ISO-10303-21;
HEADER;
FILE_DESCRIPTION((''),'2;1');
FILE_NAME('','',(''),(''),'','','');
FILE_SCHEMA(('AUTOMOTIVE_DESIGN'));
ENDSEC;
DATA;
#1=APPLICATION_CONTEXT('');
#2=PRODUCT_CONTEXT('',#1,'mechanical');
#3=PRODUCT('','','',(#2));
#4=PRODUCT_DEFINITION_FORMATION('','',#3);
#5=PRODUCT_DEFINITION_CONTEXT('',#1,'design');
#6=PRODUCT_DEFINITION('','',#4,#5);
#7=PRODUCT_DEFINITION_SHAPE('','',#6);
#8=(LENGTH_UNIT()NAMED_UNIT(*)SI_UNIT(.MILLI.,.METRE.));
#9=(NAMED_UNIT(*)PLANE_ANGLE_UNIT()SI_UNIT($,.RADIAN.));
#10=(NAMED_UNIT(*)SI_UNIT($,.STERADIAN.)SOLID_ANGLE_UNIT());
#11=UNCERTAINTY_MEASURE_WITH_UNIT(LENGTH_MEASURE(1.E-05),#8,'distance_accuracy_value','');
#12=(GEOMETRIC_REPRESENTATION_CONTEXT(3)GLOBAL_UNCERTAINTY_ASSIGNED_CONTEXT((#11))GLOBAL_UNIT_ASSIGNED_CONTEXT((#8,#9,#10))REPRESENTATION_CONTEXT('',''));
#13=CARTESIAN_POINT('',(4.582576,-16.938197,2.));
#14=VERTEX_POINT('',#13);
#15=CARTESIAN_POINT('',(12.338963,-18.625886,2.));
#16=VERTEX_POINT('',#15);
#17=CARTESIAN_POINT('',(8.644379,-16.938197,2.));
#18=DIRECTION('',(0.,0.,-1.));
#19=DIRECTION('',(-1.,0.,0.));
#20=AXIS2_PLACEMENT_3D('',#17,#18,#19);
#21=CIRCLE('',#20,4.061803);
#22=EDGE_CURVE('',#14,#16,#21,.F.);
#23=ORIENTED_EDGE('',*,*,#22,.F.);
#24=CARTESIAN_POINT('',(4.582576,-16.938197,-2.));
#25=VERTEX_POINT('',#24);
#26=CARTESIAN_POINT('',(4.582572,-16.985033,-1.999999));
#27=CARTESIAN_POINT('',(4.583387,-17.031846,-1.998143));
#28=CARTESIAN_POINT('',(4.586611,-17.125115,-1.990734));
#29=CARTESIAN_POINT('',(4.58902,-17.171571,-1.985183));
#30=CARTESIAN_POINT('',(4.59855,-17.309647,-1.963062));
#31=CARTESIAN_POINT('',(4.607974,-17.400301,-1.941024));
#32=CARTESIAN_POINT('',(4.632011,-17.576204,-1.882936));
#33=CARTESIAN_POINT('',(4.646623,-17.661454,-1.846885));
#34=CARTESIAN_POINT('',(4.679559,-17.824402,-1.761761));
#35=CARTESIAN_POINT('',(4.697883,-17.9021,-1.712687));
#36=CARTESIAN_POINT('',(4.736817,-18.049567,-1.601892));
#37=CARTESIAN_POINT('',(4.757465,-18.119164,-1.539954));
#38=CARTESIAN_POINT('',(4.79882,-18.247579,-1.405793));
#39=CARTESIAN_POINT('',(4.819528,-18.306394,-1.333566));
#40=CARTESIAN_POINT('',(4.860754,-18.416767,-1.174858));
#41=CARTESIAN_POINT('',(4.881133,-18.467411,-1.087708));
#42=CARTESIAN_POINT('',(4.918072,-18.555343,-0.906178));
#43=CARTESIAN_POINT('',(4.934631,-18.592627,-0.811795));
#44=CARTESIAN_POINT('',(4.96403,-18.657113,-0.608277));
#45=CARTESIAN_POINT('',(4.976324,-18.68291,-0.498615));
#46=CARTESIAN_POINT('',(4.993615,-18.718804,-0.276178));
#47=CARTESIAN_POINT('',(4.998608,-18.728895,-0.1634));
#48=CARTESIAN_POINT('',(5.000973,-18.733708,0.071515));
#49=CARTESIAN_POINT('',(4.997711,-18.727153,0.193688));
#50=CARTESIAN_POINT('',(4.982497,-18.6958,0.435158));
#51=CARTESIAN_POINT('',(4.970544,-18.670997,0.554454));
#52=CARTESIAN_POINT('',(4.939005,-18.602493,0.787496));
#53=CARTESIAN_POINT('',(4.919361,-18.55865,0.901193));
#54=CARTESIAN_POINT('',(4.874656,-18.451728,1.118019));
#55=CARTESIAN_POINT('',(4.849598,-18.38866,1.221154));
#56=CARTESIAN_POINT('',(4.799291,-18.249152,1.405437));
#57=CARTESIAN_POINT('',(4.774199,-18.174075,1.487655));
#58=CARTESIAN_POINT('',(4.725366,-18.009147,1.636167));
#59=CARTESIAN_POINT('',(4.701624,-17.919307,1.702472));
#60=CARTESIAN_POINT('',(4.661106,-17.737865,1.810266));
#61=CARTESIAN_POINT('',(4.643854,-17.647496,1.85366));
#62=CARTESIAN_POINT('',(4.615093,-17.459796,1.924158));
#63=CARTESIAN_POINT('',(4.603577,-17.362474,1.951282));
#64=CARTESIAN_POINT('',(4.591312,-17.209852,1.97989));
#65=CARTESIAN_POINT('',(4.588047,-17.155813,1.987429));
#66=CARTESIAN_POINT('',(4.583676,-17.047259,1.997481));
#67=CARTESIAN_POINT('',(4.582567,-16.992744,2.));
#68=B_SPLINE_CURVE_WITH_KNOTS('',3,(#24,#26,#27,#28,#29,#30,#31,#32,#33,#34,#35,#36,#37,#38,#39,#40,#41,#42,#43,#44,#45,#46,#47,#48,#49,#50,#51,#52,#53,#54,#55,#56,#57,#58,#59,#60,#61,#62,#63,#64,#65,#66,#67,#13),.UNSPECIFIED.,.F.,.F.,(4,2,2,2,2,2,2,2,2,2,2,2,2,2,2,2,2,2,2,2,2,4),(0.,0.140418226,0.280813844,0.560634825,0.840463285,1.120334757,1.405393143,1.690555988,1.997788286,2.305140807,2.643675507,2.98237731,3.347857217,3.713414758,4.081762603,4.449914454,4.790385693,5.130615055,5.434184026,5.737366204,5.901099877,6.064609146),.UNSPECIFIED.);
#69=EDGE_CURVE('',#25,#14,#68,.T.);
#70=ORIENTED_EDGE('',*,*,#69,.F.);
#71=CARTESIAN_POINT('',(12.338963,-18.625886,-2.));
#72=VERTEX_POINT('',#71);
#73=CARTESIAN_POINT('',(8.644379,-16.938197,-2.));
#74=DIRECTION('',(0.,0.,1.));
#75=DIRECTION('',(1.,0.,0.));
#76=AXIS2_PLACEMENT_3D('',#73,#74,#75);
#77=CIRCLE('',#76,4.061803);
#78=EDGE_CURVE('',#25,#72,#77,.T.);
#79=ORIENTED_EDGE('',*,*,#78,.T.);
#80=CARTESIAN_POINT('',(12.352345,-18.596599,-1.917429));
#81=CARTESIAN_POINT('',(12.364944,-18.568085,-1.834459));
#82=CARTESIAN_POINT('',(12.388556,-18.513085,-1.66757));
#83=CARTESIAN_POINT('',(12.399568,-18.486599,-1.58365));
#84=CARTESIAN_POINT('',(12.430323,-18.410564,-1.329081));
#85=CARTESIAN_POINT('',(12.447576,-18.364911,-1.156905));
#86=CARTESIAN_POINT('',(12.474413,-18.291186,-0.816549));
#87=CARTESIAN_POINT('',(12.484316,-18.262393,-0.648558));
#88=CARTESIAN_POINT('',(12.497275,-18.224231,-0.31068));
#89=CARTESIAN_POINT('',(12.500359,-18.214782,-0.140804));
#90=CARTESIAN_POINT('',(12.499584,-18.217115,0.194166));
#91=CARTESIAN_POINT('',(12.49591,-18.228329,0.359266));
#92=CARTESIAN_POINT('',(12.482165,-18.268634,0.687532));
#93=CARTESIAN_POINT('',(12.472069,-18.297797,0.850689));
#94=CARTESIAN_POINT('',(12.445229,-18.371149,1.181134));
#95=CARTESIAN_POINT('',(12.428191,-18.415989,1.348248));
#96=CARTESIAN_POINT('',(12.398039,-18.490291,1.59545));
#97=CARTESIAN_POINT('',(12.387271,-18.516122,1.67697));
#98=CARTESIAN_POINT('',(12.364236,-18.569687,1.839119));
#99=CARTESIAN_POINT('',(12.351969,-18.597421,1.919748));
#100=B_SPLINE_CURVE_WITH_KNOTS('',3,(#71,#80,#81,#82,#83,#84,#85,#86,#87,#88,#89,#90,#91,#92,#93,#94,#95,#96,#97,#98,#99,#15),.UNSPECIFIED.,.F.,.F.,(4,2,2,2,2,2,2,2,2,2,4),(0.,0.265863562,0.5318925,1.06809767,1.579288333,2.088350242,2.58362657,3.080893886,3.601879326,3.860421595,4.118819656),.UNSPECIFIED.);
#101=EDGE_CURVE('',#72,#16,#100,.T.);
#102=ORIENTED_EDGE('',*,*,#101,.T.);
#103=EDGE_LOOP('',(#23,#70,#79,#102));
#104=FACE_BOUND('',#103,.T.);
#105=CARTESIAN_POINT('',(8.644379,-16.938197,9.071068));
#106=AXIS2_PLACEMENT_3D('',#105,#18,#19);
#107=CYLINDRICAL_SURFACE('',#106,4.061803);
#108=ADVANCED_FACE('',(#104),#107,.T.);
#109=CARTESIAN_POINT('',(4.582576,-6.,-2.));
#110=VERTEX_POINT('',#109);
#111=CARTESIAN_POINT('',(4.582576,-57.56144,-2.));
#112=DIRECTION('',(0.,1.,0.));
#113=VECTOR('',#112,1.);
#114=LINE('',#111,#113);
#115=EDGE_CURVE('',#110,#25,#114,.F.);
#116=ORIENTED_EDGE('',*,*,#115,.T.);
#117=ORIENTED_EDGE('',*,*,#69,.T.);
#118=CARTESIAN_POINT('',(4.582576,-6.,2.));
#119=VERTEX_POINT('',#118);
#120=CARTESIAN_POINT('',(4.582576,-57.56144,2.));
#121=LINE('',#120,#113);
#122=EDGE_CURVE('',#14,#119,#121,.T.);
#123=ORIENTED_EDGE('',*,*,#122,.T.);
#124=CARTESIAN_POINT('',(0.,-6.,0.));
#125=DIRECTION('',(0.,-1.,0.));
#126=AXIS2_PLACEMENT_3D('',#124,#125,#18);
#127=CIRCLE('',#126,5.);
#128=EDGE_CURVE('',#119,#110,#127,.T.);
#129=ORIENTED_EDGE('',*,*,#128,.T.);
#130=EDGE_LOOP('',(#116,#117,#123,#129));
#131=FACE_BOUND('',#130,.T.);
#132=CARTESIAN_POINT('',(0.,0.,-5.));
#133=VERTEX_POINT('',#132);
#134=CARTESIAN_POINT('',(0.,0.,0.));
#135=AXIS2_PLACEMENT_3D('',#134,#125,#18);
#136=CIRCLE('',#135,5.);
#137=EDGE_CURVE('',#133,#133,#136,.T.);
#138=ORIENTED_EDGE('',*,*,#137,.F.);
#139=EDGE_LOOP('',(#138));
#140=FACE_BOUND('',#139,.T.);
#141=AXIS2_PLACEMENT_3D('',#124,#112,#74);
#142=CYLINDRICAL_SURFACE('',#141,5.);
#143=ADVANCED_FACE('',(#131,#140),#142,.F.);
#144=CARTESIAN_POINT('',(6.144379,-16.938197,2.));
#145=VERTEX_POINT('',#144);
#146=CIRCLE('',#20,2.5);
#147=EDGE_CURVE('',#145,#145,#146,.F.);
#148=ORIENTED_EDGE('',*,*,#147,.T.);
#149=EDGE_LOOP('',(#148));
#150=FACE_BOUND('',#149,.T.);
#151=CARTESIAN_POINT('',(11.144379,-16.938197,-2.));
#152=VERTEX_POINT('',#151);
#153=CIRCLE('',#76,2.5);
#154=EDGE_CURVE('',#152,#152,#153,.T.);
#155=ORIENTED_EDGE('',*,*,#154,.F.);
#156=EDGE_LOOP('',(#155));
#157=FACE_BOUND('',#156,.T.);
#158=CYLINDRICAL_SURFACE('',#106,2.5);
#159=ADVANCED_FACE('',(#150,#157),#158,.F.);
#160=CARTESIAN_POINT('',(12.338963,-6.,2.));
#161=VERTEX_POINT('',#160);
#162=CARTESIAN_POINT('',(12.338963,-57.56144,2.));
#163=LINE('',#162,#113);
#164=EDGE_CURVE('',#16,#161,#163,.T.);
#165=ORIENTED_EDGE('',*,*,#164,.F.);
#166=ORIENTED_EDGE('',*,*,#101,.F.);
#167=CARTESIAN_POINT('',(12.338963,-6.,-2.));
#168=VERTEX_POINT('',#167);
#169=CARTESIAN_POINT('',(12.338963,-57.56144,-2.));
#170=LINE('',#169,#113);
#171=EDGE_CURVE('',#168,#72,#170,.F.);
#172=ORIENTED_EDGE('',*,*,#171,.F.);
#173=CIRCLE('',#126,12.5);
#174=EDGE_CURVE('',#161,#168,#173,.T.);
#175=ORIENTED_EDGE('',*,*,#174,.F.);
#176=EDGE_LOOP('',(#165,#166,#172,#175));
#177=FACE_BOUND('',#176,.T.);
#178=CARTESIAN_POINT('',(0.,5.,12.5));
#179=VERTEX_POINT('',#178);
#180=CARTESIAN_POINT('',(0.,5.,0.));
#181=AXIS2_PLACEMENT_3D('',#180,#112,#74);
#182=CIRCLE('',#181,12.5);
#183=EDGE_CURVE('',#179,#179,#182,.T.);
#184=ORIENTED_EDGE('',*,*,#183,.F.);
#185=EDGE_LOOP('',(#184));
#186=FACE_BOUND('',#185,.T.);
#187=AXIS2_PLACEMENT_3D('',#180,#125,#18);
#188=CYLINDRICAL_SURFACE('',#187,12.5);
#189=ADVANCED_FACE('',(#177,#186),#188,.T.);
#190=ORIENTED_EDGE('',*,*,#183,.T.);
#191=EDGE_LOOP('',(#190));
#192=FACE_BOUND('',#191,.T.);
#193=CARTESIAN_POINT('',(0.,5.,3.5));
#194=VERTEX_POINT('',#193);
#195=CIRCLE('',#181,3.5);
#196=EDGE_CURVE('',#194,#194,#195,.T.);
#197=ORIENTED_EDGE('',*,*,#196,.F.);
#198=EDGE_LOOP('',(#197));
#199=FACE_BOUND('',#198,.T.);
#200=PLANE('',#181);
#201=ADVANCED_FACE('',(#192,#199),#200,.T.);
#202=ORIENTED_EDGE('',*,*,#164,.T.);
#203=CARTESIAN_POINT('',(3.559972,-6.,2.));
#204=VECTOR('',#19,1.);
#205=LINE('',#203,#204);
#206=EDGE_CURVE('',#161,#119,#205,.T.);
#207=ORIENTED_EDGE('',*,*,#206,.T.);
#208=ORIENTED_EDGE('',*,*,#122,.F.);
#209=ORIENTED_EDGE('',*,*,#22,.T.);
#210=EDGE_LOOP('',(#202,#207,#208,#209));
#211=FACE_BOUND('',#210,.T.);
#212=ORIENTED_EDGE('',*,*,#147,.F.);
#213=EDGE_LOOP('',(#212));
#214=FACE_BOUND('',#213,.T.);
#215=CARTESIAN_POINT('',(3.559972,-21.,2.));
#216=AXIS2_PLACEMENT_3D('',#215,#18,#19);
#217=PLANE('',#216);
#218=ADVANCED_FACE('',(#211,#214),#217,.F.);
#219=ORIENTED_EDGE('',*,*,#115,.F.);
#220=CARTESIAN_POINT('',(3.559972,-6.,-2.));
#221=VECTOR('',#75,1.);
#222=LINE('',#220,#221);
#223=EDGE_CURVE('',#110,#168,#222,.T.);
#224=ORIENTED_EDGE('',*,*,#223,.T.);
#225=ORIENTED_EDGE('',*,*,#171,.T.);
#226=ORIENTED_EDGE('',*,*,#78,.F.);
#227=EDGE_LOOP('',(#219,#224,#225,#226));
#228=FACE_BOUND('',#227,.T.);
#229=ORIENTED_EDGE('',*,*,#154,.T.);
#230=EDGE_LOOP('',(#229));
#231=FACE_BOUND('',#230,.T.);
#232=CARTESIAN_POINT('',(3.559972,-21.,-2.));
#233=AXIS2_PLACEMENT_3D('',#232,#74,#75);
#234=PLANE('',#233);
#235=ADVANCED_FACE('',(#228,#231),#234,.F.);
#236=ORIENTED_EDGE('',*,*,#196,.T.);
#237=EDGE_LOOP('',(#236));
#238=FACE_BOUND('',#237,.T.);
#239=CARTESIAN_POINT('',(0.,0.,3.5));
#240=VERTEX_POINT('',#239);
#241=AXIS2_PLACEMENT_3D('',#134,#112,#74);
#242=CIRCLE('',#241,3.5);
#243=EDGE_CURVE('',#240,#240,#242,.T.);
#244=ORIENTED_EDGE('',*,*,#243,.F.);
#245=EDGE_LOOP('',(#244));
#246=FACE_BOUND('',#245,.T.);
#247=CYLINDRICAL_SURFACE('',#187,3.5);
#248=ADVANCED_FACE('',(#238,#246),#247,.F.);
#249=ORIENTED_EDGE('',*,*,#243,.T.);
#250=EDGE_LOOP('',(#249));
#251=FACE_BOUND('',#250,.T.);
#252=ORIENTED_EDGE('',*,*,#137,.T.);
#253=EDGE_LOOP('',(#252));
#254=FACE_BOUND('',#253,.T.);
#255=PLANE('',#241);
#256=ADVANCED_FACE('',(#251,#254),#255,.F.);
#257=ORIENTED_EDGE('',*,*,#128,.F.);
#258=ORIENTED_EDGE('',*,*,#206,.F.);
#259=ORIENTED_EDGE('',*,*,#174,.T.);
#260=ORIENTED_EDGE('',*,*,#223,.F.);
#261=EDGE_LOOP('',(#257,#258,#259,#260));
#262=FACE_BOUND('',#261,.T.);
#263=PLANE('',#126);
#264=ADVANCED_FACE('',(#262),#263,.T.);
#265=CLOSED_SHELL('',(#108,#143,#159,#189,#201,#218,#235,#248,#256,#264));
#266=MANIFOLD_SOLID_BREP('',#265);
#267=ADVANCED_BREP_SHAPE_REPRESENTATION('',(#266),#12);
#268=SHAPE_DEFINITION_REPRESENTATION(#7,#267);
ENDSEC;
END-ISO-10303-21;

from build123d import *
from build123d.topology import SkipClean

# Parameters (mm, degrees)
SKETCH1_R                      = 12.5
SKETCH1_R_2                    = 3.5
BOSS_EXTRUDE1_DEPTH            = 5
BOSS_EXTRUDE2_START            = 6
SKETCH2_R                      = 12.5
SKETCH2_R_2                    = 5
BOSS_EXTRUDE2_DEPTH            = 6
SKETCH3_W                      = 10.120170627
SKETCH3_H                      = 4
BOSS_EXTRUDE3_DEPTH            = 15
SKETCH2_2_OUTSIDE_W            = 37.094
SKETCH2_2_OUTSIDE_H            = 35.914
SKETCH2_2_OUTSIDE_R            = 12.5
SKETCH2_2_OUTSIDE_R_2          = 5
CUT_EXTRUDE1_DEPTH             = 21
CUT_EXTRUDE2_REACH             = 29.45
SKETCH4_R                      = 2.5
CUT_EXTRUDE2_DIRECTION_2_REACH = 29.45


with BuildPart() as part:
    # Sketch1 → Boss-Extrude1 (new body)
    with BuildSketch(Plane(origin=(0, 0, 0), x_dir=(1, 0, 0), z_dir=(0, 1, 0))):
        with Locations(Location((0, 0, 0), (0, 0, 270))):
            Circle(SKETCH1_R)
        with Locations(Location((0, 0, 0), (0, 0, 270))):
            Circle(SKETCH1_R_2, mode=Mode.SUBTRACT)
    extrude(amount=BOSS_EXTRUDE1_DEPTH)

    # Sketch2 → Boss-Extrude2 (add)
    with BuildSketch(Plane.XZ.offset(BOSS_EXTRUDE2_START)):
        with Locations(Location((0, 0, 0), (0, 0, 270))):
            Circle(SKETCH2_R)
        with Locations(Location((0, 0, 0), (0, 0, 270))):
            Circle(SKETCH2_R_2, mode=Mode.SUBTRACT)
    extrude(amount=-BOSS_EXTRUDE2_DEPTH)

    # Sketch3 → Boss-Extrude3 (add)
    with BuildSketch(Plane.XZ.offset(6)):
        with Locations((8.62005684, 0)):
            Rectangle(SKETCH3_W, SKETCH3_H)
    extrude(amount=BOSS_EXTRUDE3_DEPTH)

    # Sketch2<2> outside → Cut-Extrude1 (cut)
    # profile 1 of 2: a face of its own
    with SkipClean():  # the faces are left unmerged after this step: merging them gives an invalid solid
        with BuildSketch(Plane.XZ):
            with Locations((0.59, 0)):
                Rectangle(SKETCH2_2_OUTSIDE_W, SKETCH2_2_OUTSIDE_H)
            with Locations(Location((0, 0, 0), (0, 0, 350.793103779))):
                Circle(SKETCH2_2_OUTSIDE_R, mode=Mode.SUBTRACT)
        # profile 2 of 2: a face of its own
        with BuildSketch(Plane.XZ):
            with Locations(Location((0, 0, 0), (0, 0, 23.578178478))):
                Circle(SKETCH2_2_OUTSIDE_R_2)
        extrude(amount=CUT_EXTRUDE1_DEPTH, mode=Mode.SUBTRACT)
    add(part.part.scale(1), mode=Mode.REPLACE)  # the faces are merged on a copy

    # Cut-Extrude2: up to this face of the body (flat: up to its plane)
    cut_extrude2_end = Plane(part.part.faces().sort_by_distance((8.460769187, -13.5, 2))[0])
    # Sketch4 → Cut-Extrude2 (cut, up to the picked face)
    with BuildSketch(Plane(origin=(0, 0, 0), x_dir=(-1, 0, 0), z_dir=(0, 0, -1)), mode=Mode.PRIVATE) as cut_extrude2_sk1:
        with Locations((-8.644378832, -16.938196863)):
            Circle(SKETCH4_R)
    cut_extrude2_tool1 = split(extrude(cut_extrude2_sk1.sketch, amount=-CUT_EXTRUDE2_REACH, mode=Mode.PRIVATE), bisect_by=cut_extrude2_end, keep=Keep.BOTH, mode=Mode.PRIVATE)
    # Sketch4 → Cut-Extrude2 (cut, up to the picked face)
    with BuildSketch(Plane(origin=(0, 0, 0), x_dir=(-1, 0, 0), z_dir=(0, 0, -1)), mode=Mode.PRIVATE) as cut_extrude2_sk2:
        with BuildLine():
            ThreePointArc((-8.644378832, -21), (-11.516507373, -19.810325405), (-12.706181968, -16.938196863))
            Line((-12.706181968, -16.938196863), (-12.706181968, -21))
            Line((-12.706181968, -21), (-8.644378832, -21))
        make_face()
    cut_extrude2_tool2 = split(extrude(cut_extrude2_sk2.sketch, amount=-CUT_EXTRUDE2_REACH, mode=Mode.PRIVATE), bisect_by=cut_extrude2_end, keep=Keep.BOTH, mode=Mode.PRIVATE)
    # Sketch4 → Cut-Extrude2 (cut, up to the picked face)
    with BuildSketch(Plane(origin=(0, 0, 0), x_dir=(-1, 0, 0), z_dir=(0, 0, -1)), mode=Mode.PRIVATE) as cut_extrude2_sk3:
        with BuildLine():
            Line((-4.582575695, -21), (-4.582575695, -16.938196863))
            ThreePointArc((-4.582575695, -16.938196863), (-5.77225029, -19.810325405), (-8.644378832, -21))
            Line((-8.644378832, -21), (-4.582575695, -21))
        make_face()
    cut_extrude2_tool3 = split(extrude(cut_extrude2_sk3.sketch, amount=-CUT_EXTRUDE2_REACH, mode=Mode.PRIVATE), bisect_by=cut_extrude2_end, keep=Keep.BOTH, mode=Mode.PRIVATE)
    add(cut_extrude2_tool1.solids().sort_by(Axis((8.644379, -16.938197, 0), (0, 0, 1)))[0], mode=Mode.SUBTRACT)
    add(cut_extrude2_tool2.solids().sort_by(Axis((11.798905, -20.092723, 0), (0, 0, 1)))[0], mode=Mode.SUBTRACT)
    add(cut_extrude2_tool3.solids().sort_by(Axis((5.489852, -20.092723, 0), (0, 0, 1)))[0], mode=Mode.SUBTRACT)

    # Cut-Extrude2 direction 2: up to this face of the body (flat: up to its plane)
    cut_extrude2_direction_2_end = Plane(part.part.faces().sort_by_distance((8.460769187, -13.5, -2))[0])
    # Sketch4 → Cut-Extrude2 direction 2 (cut, up to the picked face)
    with BuildSketch(Plane(origin=(0, 0, 0), x_dir=(-1, 0, 0), z_dir=(0, 0, -1)), mode=Mode.PRIVATE) as cut_extrude2_direction_2_sk1:
        with Locations((-8.644378832, -16.938196863)):
            Circle(SKETCH4_R)
    cut_extrude2_direction_2_tool1 = split(extrude(cut_extrude2_direction_2_sk1.sketch, amount=CUT_EXTRUDE2_DIRECTION_2_REACH, mode=Mode.PRIVATE), bisect_by=cut_extrude2_direction_2_end, keep=Keep.BOTH, mode=Mode.PRIVATE)
    # Sketch4 → Cut-Extrude2 direction 2 (cut, up to the picked face)
    with BuildSketch(Plane(origin=(0, 0, 0), x_dir=(-1, 0, 0), z_dir=(0, 0, -1)), mode=Mode.PRIVATE) as cut_extrude2_direction_2_sk2:
        with BuildLine():
            ThreePointArc((-8.644378832, -21), (-11.516507373, -19.810325405), (-12.706181968, -16.938196863))
            Line((-12.706181968, -16.938196863), (-12.706181968, -21))
            Line((-12.706181968, -21), (-8.644378832, -21))
        make_face()
    cut_extrude2_direction_2_tool2 = split(extrude(cut_extrude2_direction_2_sk2.sketch, amount=CUT_EXTRUDE2_DIRECTION_2_REACH, mode=Mode.PRIVATE), bisect_by=cut_extrude2_direction_2_end, keep=Keep.BOTH, mode=Mode.PRIVATE)
    # Sketch4 → Cut-Extrude2 direction 2 (cut, up to the picked face)
    with BuildSketch(Plane(origin=(0, 0, 0), x_dir=(-1, 0, 0), z_dir=(0, 0, -1)), mode=Mode.PRIVATE) as cut_extrude2_direction_2_sk3:
        with BuildLine():
            Line((-4.582575695, -21), (-4.582575695, -16.938196863))
            ThreePointArc((-4.582575695, -16.938196863), (-5.77225029, -19.810325405), (-8.644378832, -21))
            Line((-8.644378832, -21), (-4.582575695, -21))
        make_face()
    cut_extrude2_direction_2_tool3 = split(extrude(cut_extrude2_direction_2_sk3.sketch, amount=CUT_EXTRUDE2_DIRECTION_2_REACH, mode=Mode.PRIVATE), bisect_by=cut_extrude2_direction_2_end, keep=Keep.BOTH, mode=Mode.PRIVATE)
    add(cut_extrude2_direction_2_tool1.solids().sort_by(Axis((8.644379, -16.938197, 0), (0, 0, -1)))[0], mode=Mode.SUBTRACT)
    add(cut_extrude2_direction_2_tool2.solids().sort_by(Axis((11.798905, -20.092723, 0), (0, 0, -1)))[0], mode=Mode.SUBTRACT)
    add(cut_extrude2_direction_2_tool3.solids().sort_by(Axis((5.489852, -20.092723, 0), (0, 0, -1)))[0], mode=Mode.SUBTRACT)


solid = part.part
